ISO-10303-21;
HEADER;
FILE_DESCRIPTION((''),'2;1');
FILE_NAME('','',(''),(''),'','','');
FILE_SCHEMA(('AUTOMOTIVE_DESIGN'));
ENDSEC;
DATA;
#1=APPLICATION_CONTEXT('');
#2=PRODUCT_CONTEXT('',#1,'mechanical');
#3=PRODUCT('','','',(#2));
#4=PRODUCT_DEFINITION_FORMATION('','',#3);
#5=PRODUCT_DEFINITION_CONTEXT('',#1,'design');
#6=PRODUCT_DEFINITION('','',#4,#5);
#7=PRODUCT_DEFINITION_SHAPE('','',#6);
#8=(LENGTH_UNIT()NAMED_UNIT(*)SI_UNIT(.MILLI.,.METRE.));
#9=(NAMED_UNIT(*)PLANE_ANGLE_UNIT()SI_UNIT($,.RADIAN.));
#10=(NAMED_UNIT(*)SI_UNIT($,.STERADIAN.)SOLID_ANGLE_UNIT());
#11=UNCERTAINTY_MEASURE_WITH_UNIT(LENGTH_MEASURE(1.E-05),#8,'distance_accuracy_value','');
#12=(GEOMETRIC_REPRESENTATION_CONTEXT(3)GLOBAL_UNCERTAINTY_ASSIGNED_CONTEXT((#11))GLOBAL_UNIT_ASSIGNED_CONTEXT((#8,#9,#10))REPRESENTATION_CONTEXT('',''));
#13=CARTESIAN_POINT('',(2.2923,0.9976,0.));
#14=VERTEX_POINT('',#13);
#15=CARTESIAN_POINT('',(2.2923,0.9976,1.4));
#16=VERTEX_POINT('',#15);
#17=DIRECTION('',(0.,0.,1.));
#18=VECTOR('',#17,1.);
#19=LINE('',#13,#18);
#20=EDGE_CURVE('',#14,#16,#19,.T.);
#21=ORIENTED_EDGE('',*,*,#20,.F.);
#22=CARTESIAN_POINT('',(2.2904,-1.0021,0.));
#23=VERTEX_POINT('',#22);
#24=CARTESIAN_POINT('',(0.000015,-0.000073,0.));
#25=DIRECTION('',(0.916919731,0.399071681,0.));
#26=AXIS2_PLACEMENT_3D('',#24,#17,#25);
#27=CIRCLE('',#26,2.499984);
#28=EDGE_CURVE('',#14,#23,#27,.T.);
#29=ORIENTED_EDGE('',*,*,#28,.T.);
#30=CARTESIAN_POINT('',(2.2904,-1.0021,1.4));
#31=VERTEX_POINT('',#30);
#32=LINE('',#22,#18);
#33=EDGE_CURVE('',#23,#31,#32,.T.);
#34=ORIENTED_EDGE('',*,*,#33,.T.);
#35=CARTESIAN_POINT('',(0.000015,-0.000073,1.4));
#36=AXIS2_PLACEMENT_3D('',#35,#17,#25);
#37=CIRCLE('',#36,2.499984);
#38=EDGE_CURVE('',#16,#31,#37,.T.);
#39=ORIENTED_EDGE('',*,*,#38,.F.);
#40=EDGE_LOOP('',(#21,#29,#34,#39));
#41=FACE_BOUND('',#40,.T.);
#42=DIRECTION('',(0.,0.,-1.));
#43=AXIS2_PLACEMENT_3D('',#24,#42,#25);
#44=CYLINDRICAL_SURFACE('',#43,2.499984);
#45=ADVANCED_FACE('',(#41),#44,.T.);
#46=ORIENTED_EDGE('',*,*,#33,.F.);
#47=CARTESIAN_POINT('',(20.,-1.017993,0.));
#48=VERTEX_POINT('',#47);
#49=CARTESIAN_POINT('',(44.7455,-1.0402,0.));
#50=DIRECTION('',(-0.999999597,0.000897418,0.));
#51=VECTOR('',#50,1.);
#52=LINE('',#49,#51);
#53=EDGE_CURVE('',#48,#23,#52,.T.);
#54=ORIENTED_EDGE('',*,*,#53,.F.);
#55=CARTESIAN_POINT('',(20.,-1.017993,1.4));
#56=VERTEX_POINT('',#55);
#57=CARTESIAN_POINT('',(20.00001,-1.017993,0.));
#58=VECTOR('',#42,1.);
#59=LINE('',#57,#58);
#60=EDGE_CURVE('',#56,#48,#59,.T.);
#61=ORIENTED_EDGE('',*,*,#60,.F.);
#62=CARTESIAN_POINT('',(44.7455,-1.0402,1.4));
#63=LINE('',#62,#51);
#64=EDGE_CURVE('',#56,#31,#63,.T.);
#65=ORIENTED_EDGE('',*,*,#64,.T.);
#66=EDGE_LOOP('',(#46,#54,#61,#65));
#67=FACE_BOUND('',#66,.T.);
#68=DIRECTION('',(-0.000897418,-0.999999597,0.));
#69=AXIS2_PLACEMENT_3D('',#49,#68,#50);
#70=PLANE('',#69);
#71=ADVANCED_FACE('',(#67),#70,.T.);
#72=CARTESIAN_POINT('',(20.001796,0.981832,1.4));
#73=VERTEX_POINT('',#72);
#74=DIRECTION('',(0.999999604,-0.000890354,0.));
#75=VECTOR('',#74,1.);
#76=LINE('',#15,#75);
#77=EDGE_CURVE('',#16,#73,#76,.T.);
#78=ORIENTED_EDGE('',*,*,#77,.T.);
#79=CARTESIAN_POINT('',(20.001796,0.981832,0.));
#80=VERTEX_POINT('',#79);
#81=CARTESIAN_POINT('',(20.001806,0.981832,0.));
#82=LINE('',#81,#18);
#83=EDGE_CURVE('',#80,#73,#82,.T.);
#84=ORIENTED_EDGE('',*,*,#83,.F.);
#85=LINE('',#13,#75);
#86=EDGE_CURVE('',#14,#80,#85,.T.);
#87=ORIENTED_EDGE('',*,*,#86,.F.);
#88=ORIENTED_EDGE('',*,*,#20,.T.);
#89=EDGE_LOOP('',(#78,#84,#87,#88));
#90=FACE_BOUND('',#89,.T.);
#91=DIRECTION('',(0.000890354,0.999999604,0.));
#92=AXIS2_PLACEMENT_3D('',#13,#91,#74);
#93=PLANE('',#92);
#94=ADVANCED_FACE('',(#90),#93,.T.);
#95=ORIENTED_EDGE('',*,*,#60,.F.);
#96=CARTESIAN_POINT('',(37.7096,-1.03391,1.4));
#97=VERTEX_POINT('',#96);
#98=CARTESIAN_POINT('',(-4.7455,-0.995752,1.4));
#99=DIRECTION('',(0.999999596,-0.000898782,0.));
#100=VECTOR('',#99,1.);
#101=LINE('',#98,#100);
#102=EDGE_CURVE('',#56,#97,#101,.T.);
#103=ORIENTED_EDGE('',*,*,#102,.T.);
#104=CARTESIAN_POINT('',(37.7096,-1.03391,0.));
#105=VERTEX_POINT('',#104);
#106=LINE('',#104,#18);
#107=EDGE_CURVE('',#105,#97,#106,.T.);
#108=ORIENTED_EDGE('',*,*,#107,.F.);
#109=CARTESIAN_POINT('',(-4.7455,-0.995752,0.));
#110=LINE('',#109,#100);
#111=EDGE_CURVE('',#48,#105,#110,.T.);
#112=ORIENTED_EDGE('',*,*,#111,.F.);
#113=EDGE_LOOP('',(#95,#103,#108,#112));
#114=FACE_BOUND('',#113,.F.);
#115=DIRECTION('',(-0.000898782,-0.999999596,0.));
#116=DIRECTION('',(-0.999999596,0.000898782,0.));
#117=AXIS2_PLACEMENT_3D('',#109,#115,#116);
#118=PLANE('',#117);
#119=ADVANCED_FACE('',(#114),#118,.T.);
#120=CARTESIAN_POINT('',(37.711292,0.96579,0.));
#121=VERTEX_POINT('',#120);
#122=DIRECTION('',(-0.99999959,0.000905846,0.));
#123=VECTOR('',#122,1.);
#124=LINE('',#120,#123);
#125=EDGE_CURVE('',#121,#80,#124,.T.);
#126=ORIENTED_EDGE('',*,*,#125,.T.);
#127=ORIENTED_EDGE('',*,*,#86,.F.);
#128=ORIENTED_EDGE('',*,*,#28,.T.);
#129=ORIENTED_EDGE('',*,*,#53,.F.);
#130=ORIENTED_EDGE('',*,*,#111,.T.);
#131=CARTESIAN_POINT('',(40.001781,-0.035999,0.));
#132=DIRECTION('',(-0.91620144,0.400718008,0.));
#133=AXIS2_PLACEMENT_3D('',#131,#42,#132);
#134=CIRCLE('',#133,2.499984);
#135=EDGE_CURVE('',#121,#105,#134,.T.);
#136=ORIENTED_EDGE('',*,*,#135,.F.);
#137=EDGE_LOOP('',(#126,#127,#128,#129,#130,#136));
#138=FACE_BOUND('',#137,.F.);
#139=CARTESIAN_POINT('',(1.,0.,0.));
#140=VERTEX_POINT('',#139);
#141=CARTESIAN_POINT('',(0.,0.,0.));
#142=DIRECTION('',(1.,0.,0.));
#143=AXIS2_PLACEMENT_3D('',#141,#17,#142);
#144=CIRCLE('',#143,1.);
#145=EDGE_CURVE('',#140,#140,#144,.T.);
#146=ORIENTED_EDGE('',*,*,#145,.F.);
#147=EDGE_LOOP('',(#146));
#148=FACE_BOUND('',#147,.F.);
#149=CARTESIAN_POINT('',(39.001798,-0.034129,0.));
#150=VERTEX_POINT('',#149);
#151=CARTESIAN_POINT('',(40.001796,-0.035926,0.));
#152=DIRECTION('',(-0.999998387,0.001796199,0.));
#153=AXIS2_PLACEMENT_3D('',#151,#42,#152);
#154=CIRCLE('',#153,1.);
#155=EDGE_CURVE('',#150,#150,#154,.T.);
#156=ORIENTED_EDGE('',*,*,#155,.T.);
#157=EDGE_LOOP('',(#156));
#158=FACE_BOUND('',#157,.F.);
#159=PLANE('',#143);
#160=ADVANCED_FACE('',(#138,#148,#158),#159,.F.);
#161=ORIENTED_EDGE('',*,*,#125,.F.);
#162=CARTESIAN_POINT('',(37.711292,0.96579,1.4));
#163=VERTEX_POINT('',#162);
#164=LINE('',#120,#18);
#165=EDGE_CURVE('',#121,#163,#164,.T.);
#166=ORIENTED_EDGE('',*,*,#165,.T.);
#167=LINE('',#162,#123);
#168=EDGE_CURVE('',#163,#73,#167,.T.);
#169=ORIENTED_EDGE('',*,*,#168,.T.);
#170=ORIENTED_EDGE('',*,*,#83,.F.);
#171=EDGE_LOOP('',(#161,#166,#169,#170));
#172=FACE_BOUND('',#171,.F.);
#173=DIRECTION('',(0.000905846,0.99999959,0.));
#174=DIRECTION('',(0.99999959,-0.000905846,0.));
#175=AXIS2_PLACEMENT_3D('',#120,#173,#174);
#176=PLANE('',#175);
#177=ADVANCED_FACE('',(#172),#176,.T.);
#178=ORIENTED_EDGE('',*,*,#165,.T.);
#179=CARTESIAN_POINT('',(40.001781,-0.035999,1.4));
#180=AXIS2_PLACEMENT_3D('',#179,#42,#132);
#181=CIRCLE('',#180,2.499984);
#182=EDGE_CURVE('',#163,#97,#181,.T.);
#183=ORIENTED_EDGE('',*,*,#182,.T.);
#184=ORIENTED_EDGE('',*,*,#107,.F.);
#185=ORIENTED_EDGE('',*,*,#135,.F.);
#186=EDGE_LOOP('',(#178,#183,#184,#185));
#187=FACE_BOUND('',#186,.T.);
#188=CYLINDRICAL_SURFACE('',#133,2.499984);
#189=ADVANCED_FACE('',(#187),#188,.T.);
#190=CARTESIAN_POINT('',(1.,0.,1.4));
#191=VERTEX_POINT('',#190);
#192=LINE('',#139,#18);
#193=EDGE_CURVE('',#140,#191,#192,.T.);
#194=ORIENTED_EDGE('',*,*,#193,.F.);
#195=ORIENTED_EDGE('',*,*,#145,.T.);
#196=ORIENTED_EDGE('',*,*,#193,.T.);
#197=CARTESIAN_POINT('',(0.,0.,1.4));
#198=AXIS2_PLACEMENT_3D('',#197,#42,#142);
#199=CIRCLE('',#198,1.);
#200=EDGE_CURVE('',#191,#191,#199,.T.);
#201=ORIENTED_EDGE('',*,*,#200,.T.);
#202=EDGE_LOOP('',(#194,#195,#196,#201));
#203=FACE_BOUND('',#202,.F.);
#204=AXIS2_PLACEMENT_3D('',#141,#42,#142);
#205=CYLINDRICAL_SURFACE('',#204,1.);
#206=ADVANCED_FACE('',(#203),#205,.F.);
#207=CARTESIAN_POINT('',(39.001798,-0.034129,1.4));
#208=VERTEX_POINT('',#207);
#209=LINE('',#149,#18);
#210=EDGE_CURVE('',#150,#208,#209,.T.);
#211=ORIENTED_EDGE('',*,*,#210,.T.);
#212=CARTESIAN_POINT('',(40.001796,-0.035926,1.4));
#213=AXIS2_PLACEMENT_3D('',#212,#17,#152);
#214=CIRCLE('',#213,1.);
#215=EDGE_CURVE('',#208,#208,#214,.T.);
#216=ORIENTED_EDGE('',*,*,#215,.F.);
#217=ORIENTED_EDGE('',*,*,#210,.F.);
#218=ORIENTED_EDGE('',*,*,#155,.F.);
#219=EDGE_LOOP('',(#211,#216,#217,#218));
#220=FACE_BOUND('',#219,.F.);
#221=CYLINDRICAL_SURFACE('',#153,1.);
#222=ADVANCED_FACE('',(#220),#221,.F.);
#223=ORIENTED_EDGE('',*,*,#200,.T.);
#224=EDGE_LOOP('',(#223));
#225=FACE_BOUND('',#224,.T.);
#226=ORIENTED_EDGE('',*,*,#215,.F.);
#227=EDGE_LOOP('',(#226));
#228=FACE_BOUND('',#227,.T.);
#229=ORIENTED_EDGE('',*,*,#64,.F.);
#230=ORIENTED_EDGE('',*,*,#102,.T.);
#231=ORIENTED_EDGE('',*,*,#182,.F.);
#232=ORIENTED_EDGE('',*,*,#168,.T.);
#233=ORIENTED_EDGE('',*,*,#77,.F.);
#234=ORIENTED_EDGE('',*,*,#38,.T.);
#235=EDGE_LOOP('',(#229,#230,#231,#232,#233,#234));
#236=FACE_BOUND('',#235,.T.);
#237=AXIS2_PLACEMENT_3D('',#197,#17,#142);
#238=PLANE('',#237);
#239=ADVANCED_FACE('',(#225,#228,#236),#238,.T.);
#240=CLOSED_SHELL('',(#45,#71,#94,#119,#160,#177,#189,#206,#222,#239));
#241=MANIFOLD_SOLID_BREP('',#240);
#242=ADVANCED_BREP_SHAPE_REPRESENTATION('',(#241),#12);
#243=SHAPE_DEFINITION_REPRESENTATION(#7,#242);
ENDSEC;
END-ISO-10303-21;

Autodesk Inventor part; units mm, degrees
ref_plane "YZ Plane" through (0, 0, 0) normal (1, 0, 0) x (0, 1, 0)
ref_plane "XZ Plane" through (0, 0, 0) normal (0, 1, 0) x (-1, 0, 0)
ref_plane "XY Plane" through (0, 0, 0) normal (0, 0, 1) x (1, 0, 0)
sketch "Sketch1" plane through (0, 0, 0) normal (0, 0, 1) x (1, 0, 0)
  circle A0 centre (0, 0) radius 1
  circle A1 centre (47.0377, -0.0423) radius 1
  arc A2 (2.2923, 0.9976) -> (2.2904, -1.0021) centre (0, 0) ccw
  arc A3 (44.7455, -1.0402) -> (44.7473, 0.9598) centre (47.0377, -0.0423) ccw
  line L0 (0, -2) -> (0, 1)
  line L1 (48.4179, 2.0423) -> (48.671, 2.0423)
  line L2 (48.671, -1.9577) -> (48.6442, -1.9577)
  line L3 (48.671, 2.0423) -> (48.671, 1.8505)
  line L4 (48.671, -1.935) -> (48.671, -1.9577)
  line L5 (0, 1) -> (0.0018, 1)
  line L6 (2.2923, 0.9976) -> (44.7473, 0.9598)
  line L7 (47.0404, -1.0422) -> (47.0368, -1.0423)
  line L8 (44.7455, -1.0402) -> (2.2904, -1.0021)
  dimension "d0" = 2
  dimension "d1" = 2
  dimension "d2" = 5
  dimension "d3" = 5
  dimension "d5" = 4
extrude "Extrusion1" add sketch "Sketch1" along normal blind 1.4 contours L6 A3 L8 A2
sketch "Sketch2" plane through (0, 0, 0) normal (0, 0, -1) x (-1, 0, 0)
  point P0 (0, 0)
sketch "Sketch3" plane through (44.7455, -1.0402, 0) normal (-0.0008981, -0.9999996, 0) x (0.9999996, -0.0008981, 0)
  point P0 (-44.7464, 0)
sketch "Sketch4" plane through (44.7455, -1.0402, 0) normal (-0.0008981, -0.9999996, 0) x (0.9999996, -0.0008981, 0)
  line L0 (-44.7455, 0) -> (-24.7455, 0)
  line L1 (-24.7455, 0) -> (-24.7455, 4.8561)
  line L2 (-24.7455, -1.4779) -> (7.1983, -1.4779)
  line L3 (7.1983, -1.4779) -> (7.1983, 5.595)
  line L4 (7.1983, 5.595) -> (-24.7455, 5.595)
  line L5 (-24.7455, 5.595) -> (-24.7455, -1.4779)
  point P0 (-44.7464, 0)
  dimension "d8" = 20
extrude "Extrusion2" cut sketch "Sketch4" along normal mid plane 10
mirror "Mirror1" about plane through (20, -1.018, 5.595) normal (0.9999996, -0.0008981, 0)
properties part number "Restrain_Pin_Pinky_1"
